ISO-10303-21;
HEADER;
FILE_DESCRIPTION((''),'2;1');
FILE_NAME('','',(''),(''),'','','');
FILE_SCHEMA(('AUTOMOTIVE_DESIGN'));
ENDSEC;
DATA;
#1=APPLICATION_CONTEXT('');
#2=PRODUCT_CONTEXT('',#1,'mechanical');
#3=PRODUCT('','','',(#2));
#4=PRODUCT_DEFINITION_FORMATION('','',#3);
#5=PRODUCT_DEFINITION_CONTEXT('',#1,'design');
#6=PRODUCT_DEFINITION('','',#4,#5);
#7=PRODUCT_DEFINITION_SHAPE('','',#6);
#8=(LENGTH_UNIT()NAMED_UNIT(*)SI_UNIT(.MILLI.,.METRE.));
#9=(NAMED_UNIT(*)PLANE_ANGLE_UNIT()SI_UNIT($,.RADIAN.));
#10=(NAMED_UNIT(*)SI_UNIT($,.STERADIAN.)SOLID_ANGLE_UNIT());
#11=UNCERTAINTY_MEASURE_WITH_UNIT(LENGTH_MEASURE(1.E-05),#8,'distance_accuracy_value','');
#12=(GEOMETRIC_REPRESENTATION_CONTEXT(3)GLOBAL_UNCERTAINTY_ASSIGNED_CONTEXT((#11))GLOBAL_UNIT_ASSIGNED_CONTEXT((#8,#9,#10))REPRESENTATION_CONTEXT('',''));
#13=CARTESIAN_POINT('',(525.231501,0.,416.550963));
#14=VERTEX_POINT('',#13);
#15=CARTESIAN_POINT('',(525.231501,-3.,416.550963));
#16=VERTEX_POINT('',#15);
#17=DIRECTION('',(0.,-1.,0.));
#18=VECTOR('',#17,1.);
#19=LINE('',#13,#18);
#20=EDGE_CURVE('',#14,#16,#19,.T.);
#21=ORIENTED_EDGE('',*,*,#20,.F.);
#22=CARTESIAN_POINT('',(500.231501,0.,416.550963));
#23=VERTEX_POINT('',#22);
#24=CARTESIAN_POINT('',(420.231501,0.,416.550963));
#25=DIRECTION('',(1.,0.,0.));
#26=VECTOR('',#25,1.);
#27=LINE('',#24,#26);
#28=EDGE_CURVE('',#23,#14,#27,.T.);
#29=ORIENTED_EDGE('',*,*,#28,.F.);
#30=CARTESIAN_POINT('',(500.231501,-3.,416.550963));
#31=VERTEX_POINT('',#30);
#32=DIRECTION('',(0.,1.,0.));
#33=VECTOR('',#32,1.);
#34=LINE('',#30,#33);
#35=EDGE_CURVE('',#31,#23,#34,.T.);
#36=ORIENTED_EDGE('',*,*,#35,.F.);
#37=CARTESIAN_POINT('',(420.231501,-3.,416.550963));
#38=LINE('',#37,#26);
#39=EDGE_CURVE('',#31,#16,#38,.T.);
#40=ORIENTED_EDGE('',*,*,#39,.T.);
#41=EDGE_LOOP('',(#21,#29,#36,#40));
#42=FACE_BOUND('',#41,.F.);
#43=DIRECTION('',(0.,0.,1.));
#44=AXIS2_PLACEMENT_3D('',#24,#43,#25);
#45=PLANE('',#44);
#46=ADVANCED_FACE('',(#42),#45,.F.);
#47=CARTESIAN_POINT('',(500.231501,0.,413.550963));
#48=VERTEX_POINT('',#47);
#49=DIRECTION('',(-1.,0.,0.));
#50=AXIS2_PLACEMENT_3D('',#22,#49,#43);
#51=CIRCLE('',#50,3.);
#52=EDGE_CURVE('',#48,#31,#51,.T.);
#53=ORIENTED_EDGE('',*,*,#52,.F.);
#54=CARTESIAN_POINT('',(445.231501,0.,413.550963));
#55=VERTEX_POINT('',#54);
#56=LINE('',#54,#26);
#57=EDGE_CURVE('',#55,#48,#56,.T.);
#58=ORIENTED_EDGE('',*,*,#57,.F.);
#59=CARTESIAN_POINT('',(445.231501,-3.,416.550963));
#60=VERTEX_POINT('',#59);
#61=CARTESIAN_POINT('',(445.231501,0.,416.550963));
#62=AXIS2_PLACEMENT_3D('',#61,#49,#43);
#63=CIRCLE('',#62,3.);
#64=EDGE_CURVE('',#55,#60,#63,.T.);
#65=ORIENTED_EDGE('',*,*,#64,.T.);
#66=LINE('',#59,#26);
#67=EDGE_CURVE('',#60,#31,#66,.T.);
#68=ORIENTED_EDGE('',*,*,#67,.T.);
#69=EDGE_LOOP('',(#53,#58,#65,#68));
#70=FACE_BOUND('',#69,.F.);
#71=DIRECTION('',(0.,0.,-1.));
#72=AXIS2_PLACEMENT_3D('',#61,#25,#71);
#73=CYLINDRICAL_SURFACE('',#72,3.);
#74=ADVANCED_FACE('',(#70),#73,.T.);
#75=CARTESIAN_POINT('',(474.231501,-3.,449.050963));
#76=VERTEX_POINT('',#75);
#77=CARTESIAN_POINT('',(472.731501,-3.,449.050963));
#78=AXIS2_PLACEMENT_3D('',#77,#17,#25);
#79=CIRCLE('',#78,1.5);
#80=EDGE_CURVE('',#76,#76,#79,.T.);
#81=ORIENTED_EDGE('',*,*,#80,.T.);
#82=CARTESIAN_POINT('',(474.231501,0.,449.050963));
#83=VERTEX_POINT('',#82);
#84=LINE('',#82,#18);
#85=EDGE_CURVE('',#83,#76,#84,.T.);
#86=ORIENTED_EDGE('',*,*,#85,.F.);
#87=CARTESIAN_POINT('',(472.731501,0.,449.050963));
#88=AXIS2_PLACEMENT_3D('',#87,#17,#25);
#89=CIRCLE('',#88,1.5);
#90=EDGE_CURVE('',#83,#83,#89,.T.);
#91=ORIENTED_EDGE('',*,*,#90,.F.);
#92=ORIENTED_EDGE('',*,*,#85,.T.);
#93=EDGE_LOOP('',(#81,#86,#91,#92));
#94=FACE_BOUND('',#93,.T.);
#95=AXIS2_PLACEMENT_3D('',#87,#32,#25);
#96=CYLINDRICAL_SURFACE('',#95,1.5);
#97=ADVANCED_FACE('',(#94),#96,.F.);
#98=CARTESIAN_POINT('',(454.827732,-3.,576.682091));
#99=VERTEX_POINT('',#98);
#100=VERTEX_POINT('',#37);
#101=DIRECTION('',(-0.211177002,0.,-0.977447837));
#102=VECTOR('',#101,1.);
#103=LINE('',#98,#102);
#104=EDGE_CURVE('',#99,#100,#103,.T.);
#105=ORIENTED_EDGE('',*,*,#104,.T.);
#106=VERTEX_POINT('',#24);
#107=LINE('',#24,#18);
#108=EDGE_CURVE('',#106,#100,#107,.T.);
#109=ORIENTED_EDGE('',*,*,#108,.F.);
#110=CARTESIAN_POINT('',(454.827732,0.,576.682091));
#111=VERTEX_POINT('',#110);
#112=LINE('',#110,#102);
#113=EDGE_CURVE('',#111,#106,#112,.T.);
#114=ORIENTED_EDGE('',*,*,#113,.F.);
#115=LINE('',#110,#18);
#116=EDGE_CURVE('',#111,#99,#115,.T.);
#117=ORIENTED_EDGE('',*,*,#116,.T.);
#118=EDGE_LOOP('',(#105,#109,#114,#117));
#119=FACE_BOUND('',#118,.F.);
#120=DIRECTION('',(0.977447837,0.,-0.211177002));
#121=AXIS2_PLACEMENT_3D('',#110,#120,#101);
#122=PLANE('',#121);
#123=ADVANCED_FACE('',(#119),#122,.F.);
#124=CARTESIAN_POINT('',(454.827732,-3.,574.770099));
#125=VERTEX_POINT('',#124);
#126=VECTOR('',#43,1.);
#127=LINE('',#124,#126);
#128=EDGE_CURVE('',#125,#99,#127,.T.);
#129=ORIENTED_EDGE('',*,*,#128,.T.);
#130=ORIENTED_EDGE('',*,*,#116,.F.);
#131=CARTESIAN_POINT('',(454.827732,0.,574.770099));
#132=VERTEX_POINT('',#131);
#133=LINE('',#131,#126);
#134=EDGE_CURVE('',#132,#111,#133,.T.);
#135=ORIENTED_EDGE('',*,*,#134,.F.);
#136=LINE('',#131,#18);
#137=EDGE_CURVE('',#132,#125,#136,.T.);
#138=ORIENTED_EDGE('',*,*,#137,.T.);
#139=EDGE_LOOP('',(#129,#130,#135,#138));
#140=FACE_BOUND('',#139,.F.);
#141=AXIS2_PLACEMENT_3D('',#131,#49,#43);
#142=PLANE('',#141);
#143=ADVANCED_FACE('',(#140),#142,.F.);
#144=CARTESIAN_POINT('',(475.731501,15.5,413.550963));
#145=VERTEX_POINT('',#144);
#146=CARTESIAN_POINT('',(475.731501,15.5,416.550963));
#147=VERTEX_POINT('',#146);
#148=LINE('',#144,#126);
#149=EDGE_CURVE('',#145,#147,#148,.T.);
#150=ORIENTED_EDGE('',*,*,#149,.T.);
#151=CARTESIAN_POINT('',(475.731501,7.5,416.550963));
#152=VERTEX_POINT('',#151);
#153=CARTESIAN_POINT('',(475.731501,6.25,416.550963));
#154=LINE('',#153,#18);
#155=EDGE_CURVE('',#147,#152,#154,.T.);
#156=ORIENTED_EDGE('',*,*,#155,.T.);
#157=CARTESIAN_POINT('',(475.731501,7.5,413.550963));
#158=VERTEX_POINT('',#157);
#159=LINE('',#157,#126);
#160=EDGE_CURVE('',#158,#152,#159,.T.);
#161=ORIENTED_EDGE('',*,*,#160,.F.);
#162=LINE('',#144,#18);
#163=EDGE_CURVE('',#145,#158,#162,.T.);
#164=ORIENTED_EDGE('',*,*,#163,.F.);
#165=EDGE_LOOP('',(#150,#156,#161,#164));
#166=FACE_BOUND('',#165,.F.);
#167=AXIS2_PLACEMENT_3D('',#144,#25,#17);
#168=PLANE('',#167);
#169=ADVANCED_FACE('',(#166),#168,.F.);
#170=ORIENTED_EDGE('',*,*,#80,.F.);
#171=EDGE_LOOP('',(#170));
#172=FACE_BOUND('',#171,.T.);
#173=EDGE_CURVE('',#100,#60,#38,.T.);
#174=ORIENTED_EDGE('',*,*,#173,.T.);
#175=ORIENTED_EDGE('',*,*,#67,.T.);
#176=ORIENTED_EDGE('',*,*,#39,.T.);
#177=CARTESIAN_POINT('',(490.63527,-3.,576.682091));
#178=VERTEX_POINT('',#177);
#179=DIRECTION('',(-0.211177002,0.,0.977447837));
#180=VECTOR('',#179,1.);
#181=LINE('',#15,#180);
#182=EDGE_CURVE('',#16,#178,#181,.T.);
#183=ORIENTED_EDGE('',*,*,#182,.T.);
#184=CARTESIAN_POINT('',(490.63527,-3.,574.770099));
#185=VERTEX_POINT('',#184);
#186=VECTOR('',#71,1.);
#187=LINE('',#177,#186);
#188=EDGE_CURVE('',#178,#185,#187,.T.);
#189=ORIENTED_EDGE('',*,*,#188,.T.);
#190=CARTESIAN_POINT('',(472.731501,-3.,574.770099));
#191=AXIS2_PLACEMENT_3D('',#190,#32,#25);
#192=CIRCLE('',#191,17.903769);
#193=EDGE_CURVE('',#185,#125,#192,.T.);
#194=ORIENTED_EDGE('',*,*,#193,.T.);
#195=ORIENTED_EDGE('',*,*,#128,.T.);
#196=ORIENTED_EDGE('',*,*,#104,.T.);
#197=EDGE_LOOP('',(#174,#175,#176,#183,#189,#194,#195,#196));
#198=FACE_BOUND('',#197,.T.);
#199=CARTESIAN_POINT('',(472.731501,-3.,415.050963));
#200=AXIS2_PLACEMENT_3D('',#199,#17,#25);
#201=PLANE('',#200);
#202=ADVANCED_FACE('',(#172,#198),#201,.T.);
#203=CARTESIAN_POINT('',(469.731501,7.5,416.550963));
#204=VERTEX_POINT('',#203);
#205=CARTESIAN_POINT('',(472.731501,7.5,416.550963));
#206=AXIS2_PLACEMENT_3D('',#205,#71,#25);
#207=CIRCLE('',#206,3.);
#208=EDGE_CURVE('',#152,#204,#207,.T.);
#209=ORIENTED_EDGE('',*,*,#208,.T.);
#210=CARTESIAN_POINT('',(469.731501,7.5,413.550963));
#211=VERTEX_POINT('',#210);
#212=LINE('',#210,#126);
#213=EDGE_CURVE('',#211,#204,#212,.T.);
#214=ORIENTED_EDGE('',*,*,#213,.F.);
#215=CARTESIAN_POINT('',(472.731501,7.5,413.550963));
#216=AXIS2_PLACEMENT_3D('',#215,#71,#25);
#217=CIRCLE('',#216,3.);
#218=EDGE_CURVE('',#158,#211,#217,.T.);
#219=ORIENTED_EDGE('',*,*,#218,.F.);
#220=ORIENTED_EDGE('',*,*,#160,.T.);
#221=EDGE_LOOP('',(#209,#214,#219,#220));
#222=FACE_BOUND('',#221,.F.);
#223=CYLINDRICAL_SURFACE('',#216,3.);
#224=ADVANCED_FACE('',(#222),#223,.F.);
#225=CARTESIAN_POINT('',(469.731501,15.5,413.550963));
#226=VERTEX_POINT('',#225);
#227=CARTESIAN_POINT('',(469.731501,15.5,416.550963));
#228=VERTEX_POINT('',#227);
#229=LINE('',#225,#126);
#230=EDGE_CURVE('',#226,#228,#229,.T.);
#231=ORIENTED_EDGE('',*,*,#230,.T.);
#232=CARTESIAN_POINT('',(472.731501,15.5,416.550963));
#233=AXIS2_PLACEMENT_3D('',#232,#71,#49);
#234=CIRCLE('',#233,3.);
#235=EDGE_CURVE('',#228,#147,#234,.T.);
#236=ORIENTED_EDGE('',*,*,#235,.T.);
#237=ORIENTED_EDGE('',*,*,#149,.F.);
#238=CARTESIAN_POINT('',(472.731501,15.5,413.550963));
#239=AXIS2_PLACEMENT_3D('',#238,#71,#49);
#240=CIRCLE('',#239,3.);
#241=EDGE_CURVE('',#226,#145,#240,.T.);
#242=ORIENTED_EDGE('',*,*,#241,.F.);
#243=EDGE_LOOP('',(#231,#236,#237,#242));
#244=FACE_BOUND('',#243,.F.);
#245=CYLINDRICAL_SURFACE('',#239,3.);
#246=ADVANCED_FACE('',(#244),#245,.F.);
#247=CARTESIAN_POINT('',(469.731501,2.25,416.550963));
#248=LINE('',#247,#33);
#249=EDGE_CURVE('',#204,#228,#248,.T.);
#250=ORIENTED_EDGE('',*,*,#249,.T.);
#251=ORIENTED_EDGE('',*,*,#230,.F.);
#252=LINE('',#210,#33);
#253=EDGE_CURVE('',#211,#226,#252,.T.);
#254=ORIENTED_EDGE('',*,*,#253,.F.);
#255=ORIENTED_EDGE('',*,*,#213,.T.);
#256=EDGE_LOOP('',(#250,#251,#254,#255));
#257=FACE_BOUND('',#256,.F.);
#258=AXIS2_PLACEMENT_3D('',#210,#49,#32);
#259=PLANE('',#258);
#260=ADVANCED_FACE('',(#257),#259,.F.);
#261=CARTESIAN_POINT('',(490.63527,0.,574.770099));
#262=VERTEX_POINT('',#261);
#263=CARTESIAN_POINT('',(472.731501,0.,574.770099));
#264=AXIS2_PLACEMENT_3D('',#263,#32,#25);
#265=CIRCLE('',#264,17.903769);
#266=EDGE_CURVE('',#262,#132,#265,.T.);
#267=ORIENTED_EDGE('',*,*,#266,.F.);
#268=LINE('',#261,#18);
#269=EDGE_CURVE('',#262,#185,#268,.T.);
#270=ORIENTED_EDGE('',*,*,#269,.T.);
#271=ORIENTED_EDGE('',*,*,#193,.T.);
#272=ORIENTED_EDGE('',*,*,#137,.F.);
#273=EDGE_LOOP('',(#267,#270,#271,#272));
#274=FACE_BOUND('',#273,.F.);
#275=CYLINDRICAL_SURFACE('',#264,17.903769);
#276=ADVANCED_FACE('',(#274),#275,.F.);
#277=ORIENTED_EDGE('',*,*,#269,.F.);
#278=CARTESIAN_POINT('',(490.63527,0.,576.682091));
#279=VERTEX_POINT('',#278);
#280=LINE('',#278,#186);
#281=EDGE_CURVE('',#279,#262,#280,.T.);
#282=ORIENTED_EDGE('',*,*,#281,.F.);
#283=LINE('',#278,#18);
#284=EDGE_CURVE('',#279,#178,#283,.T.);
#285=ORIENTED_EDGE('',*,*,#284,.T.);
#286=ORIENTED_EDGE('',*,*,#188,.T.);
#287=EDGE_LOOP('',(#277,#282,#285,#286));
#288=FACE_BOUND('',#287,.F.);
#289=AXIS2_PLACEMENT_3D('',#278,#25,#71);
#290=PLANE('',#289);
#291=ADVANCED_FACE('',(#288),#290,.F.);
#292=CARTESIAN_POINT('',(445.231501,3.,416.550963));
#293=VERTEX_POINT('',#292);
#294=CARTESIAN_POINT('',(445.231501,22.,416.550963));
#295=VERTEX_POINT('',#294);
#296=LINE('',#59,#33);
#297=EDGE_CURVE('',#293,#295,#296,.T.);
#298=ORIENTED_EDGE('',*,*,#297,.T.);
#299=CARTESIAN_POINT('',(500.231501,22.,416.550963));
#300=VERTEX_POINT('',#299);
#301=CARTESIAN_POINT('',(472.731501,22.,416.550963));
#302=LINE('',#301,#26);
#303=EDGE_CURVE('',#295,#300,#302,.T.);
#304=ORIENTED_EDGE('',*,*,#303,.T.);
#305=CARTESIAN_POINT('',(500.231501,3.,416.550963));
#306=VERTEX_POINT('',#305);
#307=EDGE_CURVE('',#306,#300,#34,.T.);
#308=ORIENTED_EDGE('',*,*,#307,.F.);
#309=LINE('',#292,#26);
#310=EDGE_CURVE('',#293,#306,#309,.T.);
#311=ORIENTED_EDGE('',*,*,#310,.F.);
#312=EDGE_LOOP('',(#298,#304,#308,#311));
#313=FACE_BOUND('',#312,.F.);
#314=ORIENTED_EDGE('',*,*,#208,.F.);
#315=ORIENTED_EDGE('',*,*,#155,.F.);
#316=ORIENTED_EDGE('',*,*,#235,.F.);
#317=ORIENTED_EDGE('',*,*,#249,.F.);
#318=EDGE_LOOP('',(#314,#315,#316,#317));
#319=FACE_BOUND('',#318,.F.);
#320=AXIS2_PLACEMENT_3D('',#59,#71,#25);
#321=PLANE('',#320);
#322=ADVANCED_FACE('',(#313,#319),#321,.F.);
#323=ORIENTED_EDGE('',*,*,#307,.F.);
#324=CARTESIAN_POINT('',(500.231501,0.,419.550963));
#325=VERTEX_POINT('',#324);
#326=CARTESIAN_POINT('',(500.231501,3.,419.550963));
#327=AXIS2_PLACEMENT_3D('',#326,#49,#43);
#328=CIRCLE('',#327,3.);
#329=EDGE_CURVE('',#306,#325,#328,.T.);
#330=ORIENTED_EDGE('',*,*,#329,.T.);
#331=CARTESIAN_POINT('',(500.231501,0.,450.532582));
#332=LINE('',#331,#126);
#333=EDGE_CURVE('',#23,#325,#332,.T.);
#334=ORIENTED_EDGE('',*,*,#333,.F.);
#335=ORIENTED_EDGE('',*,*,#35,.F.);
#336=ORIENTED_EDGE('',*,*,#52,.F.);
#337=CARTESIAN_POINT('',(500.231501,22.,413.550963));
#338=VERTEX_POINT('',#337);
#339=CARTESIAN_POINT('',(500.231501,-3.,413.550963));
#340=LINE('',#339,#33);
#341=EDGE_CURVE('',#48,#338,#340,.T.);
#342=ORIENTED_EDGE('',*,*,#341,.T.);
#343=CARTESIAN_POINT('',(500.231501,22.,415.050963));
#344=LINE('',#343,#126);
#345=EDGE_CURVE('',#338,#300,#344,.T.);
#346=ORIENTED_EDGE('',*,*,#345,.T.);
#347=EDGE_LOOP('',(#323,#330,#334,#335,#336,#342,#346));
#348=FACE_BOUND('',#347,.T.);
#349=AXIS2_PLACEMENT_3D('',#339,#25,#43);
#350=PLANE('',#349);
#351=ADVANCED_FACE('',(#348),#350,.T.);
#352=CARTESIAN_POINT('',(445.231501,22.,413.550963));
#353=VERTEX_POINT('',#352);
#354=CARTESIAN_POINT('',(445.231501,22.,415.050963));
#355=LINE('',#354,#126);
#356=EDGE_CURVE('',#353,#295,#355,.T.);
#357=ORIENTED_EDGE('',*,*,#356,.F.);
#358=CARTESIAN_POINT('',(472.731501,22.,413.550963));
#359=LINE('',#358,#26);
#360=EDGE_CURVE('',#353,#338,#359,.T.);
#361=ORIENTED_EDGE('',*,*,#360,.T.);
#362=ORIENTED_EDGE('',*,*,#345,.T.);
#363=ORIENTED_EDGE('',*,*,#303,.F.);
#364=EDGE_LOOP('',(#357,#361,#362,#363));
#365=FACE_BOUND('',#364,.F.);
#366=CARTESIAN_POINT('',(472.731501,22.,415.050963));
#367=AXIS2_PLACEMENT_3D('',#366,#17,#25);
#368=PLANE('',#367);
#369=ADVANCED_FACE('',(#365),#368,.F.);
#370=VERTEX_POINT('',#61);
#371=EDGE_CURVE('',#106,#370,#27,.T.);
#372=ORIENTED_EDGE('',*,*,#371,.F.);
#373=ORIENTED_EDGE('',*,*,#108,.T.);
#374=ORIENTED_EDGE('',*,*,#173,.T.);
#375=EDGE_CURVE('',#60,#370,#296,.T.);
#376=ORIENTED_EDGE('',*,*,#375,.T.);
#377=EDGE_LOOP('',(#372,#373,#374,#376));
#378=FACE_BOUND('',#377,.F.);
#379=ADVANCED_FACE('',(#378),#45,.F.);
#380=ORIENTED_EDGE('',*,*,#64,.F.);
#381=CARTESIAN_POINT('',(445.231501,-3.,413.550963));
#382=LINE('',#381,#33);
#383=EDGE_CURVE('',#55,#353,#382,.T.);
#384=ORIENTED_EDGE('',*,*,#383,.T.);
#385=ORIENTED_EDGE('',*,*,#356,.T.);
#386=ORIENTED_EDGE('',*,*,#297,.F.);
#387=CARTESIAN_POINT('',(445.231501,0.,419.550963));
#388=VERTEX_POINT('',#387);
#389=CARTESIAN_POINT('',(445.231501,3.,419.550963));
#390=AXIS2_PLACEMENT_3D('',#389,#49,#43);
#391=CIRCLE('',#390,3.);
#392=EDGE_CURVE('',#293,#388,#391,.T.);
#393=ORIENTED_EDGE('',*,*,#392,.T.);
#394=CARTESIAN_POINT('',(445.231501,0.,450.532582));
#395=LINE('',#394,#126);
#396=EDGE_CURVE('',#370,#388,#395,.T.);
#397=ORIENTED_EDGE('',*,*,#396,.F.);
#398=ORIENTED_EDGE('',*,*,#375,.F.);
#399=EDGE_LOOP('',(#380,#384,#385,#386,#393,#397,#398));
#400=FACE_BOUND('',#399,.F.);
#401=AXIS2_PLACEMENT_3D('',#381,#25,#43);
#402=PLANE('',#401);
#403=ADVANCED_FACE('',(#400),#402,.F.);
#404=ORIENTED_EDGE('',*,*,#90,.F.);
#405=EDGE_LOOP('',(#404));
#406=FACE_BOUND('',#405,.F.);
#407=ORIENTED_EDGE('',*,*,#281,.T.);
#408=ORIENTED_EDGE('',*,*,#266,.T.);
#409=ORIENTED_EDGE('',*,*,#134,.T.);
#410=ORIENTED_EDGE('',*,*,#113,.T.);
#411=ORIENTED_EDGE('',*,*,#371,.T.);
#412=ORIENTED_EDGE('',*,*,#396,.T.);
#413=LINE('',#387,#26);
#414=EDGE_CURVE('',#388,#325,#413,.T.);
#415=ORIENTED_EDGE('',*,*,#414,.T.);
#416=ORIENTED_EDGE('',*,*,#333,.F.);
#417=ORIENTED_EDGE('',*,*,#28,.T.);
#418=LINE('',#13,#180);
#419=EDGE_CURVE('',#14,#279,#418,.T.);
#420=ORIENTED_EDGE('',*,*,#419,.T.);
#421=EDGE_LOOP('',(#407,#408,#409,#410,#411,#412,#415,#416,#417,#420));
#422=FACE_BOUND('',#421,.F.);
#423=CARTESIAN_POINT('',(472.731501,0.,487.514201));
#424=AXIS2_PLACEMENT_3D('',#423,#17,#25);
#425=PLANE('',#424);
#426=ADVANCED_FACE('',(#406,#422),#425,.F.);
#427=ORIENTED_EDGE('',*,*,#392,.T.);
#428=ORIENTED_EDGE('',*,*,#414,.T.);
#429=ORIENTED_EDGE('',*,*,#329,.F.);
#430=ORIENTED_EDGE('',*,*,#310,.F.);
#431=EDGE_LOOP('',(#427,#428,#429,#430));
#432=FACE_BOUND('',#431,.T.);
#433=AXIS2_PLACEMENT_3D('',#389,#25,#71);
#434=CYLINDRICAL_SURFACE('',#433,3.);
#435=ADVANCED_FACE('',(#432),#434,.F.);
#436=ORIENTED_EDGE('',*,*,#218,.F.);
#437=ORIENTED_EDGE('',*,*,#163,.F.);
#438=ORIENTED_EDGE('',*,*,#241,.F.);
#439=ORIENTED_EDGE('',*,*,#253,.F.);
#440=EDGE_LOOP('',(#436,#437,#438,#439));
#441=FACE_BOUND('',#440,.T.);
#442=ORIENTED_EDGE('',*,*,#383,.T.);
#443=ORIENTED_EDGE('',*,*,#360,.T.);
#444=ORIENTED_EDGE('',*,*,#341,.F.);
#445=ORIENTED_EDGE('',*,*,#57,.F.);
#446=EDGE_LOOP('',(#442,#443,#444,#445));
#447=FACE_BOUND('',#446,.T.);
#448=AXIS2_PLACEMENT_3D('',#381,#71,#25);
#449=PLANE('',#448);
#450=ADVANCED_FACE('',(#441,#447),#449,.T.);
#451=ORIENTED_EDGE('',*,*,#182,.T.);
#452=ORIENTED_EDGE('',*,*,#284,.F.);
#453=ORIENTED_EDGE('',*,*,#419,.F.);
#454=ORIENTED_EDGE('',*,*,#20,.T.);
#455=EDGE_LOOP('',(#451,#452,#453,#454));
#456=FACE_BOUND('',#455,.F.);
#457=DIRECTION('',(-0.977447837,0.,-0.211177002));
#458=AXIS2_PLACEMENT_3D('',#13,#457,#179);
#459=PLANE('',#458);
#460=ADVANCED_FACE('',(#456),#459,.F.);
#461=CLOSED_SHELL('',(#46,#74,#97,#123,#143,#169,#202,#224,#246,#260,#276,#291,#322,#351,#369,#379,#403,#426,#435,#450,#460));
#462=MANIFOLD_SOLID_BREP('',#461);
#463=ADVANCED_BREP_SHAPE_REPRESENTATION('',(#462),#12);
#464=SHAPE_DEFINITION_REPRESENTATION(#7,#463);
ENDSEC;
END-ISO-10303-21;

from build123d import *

# Parameters (mm, degrees)
F0_R     = 1.5
F1_DEPTH = 3
F2_W     = 55
F2_H     = 3
F3_DEPTH = 25
F4_R     = 3
F6_DEPTH = 163.1321276775


with BuildPart() as f1:
    # F0 (on Front) → F1 (new body)
    with BuildSketch(Plane.XZ):
        with BuildLine():
            Line((454.8277321524, 574.7700988736), (454.8277321524, 576.6820907487))
            Line((454.8277321524, 576.6820907487), (420.231500864, 416.5509630712))
            Line((420.231500864, 416.5509630712), (495.9500458773, 416.5509630712))
            Line((495.9500458773, 416.5509630712), (525.231500864, 416.5509630712))
            Line((525.231500864, 416.5509630712), (490.6352695757, 576.6820907487))
            Line((490.6352695757, 576.6820907487), (490.6352695757, 574.7700988736))
            ThreePointArc((490.6352695757, 574.7700988736), (472.731500864, 556.866330162), (454.8277321524, 574.7700988736))
        make_face()
        with Locations((472.731500864, 449.0509630712)):
            Circle(F0_R, mode=Mode.SUBTRACT)
    extrude(amount=F1_DEPTH)

    # F2 (on face) → F3 (join)
    with BuildSketch(Plane.XZ.offset(3)):
        with Locations((472.731500864, 415.0509630712)):
            Rectangle(F2_W, F2_H)
    extrude(amount=-F3_DEPTH)

    # F4
    f4_edges = [f1.edges().sort_by_distance(p)[0] for p in [
        (472.731501, -3, 413.550963),
        (472.731501, 0, 416.550963),
    ]]
    fillet(f4_edges, radius=F4_R)

    # F5 (on face) → F6 (cut, through all)
    with BuildSketch(Plane(origin=(0, 0, 413.5509630712), x_dir=(1, 0, 0), z_dir=(0, 0, -1))):
        with BuildLine():
            Line((475.731500864, -15.5), (475.731500864, -7.5))
            ThreePointArc((475.731500864, -7.5), (472.731500864, -4.5), (469.731500864, -7.5))
            Line((469.731500864, -7.5), (469.731500864, -15.5))
            ThreePointArc((469.731500864, -15.5), (472.731500864, -18.5), (475.731500864, -15.5))
        make_face()
    extrude(amount=-F6_DEPTH, mode=Mode.SUBTRACT)


solid = f1.part
